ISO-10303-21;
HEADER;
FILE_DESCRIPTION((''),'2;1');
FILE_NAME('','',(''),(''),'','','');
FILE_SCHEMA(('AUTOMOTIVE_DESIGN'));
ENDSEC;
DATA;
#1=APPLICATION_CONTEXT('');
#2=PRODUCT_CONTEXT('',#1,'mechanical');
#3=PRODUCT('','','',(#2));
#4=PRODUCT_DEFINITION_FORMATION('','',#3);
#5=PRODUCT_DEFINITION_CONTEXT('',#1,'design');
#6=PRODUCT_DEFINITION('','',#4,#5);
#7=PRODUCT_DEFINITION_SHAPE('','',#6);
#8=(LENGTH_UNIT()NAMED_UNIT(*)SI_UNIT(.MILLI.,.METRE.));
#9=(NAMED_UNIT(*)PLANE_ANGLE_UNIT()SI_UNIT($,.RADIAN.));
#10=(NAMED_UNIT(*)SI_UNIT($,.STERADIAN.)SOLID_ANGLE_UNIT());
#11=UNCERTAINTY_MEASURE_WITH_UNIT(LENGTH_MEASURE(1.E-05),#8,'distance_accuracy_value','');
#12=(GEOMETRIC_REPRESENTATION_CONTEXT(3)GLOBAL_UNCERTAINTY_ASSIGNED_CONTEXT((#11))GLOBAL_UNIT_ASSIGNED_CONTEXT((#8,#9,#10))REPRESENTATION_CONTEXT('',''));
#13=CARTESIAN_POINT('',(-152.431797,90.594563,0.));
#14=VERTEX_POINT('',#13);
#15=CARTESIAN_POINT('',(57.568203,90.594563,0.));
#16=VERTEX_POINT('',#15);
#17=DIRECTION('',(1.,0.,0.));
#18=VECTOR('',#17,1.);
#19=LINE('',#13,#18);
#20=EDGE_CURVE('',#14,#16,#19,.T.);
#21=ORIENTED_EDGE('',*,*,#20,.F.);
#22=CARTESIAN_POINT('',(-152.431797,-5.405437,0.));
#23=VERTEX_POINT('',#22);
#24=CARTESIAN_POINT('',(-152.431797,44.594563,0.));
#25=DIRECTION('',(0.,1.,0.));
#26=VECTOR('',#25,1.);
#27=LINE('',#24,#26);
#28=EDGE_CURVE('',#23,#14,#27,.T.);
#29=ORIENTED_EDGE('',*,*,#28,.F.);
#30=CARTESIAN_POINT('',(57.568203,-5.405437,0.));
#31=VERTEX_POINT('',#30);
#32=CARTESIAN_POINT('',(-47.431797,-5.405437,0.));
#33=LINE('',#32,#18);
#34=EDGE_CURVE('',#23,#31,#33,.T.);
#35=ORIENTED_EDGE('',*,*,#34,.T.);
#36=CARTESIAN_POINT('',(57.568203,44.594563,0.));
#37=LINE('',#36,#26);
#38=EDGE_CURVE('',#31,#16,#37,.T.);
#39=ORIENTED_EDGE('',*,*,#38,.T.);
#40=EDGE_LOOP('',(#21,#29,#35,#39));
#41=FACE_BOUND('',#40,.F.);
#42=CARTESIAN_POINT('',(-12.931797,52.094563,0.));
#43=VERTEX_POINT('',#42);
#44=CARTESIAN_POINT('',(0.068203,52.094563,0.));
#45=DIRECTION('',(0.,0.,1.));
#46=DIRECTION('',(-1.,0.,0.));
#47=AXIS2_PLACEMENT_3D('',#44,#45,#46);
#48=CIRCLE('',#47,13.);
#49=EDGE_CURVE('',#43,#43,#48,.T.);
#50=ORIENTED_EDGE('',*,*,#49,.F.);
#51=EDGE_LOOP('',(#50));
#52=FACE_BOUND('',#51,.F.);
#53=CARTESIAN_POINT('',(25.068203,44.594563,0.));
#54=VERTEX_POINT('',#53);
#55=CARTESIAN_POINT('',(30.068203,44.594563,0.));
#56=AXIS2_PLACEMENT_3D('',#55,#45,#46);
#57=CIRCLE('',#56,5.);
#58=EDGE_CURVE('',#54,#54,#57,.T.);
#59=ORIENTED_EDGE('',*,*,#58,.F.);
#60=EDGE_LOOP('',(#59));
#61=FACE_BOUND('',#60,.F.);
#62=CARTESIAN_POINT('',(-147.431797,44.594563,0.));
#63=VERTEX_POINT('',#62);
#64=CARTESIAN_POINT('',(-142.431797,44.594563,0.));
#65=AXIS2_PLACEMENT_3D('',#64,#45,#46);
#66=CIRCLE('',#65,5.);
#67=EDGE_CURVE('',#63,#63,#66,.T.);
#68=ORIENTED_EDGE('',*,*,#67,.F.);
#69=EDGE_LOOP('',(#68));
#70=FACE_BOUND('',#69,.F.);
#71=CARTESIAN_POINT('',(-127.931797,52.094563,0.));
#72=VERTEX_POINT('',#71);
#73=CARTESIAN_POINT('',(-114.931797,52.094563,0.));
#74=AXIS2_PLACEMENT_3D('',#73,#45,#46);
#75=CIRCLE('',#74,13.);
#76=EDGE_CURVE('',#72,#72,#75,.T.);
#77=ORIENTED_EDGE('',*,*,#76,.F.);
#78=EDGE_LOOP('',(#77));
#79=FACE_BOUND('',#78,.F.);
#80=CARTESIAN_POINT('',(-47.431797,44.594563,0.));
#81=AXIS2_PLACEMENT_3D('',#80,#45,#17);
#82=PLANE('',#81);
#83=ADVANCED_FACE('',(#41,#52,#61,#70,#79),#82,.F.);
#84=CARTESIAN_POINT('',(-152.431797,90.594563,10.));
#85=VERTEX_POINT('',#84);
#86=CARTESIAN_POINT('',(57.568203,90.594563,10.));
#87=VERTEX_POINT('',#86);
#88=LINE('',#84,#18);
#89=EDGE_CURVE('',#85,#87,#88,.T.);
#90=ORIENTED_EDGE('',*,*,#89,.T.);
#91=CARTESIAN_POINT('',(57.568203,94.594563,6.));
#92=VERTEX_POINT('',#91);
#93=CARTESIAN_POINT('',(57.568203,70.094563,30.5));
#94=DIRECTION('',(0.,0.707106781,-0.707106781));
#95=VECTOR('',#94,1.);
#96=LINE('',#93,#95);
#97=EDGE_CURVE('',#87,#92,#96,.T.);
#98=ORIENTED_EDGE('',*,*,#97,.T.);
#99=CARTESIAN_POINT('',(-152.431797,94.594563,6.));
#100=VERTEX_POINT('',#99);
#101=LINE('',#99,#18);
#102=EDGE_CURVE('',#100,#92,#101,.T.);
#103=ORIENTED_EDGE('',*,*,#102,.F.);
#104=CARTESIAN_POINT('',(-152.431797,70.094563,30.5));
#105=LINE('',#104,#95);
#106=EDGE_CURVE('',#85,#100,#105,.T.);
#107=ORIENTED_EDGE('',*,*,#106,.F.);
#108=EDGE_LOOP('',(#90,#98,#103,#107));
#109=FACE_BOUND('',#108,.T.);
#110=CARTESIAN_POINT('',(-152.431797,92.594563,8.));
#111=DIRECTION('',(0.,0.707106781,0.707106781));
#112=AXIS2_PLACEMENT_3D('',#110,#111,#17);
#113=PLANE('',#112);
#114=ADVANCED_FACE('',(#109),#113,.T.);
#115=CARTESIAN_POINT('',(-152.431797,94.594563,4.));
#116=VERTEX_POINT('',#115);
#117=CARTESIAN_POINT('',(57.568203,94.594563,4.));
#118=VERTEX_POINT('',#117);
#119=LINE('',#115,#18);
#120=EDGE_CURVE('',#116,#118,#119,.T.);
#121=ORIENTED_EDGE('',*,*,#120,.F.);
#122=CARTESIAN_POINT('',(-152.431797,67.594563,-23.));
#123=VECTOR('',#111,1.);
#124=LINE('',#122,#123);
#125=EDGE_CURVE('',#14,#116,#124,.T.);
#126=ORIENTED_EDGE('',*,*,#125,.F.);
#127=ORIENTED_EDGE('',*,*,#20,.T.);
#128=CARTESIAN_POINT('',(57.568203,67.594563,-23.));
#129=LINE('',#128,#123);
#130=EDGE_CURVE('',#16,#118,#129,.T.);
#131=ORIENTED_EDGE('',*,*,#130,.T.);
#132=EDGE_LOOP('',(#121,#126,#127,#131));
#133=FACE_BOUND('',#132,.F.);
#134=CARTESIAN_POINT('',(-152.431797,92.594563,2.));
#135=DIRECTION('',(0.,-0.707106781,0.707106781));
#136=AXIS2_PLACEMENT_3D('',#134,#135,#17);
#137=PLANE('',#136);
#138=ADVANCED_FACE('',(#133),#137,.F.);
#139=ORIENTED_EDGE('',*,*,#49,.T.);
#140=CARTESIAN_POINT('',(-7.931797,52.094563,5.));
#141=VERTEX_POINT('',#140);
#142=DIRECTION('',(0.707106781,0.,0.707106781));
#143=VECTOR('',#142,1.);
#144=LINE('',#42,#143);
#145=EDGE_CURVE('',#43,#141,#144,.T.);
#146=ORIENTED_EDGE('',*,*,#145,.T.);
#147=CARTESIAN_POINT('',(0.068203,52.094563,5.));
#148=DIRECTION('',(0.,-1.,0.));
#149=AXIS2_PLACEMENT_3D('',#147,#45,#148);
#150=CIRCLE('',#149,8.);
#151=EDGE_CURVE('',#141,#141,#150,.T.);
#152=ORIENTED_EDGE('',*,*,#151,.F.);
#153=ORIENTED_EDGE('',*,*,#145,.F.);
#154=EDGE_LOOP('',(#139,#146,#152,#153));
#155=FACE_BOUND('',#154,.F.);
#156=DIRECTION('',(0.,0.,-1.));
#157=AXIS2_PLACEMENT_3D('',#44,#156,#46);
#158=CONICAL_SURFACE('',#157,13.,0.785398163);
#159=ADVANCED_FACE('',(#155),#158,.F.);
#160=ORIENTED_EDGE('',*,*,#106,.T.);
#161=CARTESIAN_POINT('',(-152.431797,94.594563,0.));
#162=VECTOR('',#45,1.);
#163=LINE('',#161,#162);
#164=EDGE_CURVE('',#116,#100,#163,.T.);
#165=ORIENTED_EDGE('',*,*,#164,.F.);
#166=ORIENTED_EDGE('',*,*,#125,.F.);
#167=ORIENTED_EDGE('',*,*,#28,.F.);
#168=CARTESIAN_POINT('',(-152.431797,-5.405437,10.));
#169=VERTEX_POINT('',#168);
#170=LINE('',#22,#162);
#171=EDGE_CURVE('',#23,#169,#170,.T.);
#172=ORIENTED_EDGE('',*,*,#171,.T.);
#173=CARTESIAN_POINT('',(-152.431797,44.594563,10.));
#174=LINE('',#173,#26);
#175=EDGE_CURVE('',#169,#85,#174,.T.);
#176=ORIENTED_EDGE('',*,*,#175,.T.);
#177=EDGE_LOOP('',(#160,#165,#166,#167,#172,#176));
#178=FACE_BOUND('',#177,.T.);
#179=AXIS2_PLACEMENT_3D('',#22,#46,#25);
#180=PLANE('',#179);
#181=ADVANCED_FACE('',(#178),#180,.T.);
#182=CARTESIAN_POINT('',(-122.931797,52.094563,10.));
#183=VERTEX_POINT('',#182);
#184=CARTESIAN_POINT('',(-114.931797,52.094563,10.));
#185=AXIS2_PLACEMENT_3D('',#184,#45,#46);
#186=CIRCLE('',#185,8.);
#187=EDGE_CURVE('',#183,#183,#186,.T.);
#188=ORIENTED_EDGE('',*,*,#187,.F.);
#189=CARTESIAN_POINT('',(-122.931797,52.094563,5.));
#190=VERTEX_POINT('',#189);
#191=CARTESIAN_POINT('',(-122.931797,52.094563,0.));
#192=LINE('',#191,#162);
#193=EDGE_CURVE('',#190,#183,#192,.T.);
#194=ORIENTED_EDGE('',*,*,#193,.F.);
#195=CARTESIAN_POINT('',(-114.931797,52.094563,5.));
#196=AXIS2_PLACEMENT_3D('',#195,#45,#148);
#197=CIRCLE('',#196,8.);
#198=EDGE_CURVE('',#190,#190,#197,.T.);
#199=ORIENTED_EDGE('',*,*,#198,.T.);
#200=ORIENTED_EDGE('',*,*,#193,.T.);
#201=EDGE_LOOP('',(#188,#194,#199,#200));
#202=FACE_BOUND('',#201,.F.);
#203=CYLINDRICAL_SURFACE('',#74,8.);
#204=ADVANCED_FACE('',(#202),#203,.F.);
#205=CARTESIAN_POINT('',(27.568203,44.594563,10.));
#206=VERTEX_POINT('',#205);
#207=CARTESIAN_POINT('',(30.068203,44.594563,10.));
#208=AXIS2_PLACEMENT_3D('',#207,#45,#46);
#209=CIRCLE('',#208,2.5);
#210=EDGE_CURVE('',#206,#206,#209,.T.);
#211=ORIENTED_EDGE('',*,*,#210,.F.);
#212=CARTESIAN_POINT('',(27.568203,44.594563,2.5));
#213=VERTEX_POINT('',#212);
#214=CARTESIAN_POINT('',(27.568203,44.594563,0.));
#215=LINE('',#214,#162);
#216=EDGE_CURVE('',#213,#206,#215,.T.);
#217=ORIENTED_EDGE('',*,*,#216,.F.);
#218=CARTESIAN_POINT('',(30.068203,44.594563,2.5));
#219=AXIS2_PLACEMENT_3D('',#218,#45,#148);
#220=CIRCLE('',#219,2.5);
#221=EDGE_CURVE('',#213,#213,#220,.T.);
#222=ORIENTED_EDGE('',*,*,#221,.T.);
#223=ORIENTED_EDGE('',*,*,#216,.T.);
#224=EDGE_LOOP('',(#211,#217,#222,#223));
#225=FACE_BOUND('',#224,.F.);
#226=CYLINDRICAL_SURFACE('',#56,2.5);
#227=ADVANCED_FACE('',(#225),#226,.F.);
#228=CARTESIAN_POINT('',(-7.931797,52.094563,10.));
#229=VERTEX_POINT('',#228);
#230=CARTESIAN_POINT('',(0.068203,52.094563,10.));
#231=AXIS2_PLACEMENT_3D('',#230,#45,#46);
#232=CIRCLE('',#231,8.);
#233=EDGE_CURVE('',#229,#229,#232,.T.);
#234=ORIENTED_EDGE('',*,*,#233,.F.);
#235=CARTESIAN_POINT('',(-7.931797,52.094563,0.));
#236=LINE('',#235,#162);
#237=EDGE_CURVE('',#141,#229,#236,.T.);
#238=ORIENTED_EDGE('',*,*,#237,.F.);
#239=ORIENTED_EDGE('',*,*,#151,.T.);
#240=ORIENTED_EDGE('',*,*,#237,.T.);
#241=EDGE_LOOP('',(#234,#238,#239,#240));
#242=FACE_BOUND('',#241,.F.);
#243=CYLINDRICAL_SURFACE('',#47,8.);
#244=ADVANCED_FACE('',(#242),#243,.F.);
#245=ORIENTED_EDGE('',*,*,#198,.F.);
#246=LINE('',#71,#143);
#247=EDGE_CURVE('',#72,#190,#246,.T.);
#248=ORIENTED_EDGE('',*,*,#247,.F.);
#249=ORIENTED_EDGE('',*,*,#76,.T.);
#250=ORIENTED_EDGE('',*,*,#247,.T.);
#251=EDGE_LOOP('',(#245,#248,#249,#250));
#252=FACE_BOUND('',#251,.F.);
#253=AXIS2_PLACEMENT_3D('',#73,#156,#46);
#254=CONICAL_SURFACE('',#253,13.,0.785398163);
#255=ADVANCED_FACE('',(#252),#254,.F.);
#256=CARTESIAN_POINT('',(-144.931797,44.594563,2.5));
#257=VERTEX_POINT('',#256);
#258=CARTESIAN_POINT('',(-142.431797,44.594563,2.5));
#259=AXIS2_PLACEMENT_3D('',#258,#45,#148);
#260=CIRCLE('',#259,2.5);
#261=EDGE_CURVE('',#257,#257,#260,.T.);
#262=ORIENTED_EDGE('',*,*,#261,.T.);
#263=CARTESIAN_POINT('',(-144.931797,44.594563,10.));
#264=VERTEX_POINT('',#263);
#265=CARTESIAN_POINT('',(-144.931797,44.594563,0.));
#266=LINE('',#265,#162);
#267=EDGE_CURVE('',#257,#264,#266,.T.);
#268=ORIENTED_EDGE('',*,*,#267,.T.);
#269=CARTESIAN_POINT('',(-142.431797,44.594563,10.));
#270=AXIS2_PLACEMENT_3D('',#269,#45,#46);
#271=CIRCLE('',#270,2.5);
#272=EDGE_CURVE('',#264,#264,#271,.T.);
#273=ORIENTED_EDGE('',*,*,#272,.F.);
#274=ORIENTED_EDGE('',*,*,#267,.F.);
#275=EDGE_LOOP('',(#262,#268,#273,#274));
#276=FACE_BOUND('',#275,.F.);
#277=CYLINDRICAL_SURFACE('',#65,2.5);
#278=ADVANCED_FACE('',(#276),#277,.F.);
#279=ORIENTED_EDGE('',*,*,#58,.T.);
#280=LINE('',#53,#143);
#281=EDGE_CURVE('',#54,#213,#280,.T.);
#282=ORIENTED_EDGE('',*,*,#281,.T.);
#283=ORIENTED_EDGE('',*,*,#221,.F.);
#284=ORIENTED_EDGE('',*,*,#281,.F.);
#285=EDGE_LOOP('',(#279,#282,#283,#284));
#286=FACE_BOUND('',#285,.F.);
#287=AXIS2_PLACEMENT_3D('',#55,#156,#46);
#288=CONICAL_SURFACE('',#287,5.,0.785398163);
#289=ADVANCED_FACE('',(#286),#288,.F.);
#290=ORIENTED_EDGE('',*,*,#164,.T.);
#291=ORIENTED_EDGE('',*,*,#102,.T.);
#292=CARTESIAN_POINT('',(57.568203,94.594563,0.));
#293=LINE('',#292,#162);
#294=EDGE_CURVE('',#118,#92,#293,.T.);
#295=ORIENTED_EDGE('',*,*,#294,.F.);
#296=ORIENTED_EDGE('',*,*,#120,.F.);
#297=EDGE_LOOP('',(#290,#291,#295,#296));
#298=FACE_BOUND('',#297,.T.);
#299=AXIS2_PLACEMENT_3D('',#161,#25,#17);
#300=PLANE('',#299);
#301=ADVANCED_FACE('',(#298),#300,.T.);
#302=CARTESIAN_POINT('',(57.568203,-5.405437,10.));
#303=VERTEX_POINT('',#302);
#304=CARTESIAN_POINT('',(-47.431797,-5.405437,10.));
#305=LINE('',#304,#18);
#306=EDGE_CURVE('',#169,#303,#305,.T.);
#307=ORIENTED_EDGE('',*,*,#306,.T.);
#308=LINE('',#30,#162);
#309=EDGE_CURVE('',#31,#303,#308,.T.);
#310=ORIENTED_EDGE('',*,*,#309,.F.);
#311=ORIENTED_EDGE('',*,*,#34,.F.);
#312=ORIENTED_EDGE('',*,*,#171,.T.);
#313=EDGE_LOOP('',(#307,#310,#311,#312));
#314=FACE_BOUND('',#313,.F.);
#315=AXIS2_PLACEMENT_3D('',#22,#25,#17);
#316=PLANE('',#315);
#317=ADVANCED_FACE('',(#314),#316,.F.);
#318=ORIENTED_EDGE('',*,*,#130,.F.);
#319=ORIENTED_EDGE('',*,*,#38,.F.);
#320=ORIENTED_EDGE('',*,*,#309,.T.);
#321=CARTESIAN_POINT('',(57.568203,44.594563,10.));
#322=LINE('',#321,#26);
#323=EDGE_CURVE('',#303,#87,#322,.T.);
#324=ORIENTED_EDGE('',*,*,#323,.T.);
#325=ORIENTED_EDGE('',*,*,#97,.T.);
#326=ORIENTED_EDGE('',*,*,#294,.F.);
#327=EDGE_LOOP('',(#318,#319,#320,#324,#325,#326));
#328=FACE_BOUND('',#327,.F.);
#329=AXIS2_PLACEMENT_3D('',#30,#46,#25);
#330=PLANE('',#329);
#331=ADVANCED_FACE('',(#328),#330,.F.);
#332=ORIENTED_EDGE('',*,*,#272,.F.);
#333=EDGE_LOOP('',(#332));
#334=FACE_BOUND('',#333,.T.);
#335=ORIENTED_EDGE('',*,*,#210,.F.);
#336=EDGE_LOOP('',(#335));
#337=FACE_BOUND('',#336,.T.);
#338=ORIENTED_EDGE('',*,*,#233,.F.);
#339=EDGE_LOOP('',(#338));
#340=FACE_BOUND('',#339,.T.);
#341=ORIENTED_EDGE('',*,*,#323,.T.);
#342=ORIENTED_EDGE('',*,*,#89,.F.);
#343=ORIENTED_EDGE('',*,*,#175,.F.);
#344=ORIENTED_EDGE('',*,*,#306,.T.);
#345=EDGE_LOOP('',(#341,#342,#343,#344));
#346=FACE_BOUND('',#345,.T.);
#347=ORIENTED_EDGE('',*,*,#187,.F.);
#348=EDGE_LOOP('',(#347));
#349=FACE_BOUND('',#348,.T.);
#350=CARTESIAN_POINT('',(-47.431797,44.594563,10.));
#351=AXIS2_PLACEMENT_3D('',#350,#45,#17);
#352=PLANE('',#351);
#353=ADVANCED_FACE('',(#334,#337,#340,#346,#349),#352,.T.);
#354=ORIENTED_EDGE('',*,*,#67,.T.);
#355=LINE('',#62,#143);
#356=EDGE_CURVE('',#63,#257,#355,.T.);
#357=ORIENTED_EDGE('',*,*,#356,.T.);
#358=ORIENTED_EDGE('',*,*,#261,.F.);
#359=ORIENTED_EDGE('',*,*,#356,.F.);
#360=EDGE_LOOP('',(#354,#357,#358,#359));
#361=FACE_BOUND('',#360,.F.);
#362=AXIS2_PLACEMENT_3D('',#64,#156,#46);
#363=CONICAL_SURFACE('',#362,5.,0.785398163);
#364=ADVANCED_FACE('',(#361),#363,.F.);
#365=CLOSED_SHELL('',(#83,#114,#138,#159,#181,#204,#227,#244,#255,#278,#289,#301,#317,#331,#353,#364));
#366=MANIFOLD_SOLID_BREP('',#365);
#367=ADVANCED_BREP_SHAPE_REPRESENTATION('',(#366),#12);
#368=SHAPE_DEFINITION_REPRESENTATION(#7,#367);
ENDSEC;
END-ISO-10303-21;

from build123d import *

# Parameters (mm, degrees)
F0_W           = 210
F0_H           = 100
F1_DEPTH       = 10
F2_D           = 5
F2_CSINK_D     = 10
F2_CSINK_ANGLE = 90
F3_D           = 16
F3_CSINK_D     = 26
F3_CSINK_ANGLE = 90
F4_SIZE        = 4


with BuildPart() as f1:
    # F0 (on Top) → F1 (new body)
    with BuildSketch(Plane.XY):
        with Locations((-47.4317967892, 44.5945628711)):
            Rectangle(F0_W, F0_H)
    extrude(amount=F1_DEPTH)

    # F2 (through all)
    with Locations(Plane(origin=(0, 0, 0), x_dir=(1, 0, 0), z_dir=(0, 0, -1))):
        with Locations((30.0682032108, -44.5945628711), (-142.4317967892, -44.5945628711)):
            CounterSinkHole(F2_D / 2, F2_CSINK_D / 2, counter_sink_angle=F2_CSINK_ANGLE)

    # F3 (through all)
    with Locations(Plane(origin=(0, 0, 0), x_dir=(1, 0, 0), z_dir=(0, 0, -1))):
        with Locations((-114.9317967892, -52.0945628711), (0.0682032108, -52.0945628711)):
            CounterSinkHole(F3_D / 2, F3_CSINK_D / 2, counter_sink_angle=F3_CSINK_ANGLE)

    # F4
    f4_edges = [f1.edges().sort_by_distance(p)[0] for p in [
        (-47.431797, 94.594563, 0),
        (-47.431797, 94.594563, 10),
    ]]
    chamfer(f4_edges, length=F4_SIZE)


solid = f1.part
